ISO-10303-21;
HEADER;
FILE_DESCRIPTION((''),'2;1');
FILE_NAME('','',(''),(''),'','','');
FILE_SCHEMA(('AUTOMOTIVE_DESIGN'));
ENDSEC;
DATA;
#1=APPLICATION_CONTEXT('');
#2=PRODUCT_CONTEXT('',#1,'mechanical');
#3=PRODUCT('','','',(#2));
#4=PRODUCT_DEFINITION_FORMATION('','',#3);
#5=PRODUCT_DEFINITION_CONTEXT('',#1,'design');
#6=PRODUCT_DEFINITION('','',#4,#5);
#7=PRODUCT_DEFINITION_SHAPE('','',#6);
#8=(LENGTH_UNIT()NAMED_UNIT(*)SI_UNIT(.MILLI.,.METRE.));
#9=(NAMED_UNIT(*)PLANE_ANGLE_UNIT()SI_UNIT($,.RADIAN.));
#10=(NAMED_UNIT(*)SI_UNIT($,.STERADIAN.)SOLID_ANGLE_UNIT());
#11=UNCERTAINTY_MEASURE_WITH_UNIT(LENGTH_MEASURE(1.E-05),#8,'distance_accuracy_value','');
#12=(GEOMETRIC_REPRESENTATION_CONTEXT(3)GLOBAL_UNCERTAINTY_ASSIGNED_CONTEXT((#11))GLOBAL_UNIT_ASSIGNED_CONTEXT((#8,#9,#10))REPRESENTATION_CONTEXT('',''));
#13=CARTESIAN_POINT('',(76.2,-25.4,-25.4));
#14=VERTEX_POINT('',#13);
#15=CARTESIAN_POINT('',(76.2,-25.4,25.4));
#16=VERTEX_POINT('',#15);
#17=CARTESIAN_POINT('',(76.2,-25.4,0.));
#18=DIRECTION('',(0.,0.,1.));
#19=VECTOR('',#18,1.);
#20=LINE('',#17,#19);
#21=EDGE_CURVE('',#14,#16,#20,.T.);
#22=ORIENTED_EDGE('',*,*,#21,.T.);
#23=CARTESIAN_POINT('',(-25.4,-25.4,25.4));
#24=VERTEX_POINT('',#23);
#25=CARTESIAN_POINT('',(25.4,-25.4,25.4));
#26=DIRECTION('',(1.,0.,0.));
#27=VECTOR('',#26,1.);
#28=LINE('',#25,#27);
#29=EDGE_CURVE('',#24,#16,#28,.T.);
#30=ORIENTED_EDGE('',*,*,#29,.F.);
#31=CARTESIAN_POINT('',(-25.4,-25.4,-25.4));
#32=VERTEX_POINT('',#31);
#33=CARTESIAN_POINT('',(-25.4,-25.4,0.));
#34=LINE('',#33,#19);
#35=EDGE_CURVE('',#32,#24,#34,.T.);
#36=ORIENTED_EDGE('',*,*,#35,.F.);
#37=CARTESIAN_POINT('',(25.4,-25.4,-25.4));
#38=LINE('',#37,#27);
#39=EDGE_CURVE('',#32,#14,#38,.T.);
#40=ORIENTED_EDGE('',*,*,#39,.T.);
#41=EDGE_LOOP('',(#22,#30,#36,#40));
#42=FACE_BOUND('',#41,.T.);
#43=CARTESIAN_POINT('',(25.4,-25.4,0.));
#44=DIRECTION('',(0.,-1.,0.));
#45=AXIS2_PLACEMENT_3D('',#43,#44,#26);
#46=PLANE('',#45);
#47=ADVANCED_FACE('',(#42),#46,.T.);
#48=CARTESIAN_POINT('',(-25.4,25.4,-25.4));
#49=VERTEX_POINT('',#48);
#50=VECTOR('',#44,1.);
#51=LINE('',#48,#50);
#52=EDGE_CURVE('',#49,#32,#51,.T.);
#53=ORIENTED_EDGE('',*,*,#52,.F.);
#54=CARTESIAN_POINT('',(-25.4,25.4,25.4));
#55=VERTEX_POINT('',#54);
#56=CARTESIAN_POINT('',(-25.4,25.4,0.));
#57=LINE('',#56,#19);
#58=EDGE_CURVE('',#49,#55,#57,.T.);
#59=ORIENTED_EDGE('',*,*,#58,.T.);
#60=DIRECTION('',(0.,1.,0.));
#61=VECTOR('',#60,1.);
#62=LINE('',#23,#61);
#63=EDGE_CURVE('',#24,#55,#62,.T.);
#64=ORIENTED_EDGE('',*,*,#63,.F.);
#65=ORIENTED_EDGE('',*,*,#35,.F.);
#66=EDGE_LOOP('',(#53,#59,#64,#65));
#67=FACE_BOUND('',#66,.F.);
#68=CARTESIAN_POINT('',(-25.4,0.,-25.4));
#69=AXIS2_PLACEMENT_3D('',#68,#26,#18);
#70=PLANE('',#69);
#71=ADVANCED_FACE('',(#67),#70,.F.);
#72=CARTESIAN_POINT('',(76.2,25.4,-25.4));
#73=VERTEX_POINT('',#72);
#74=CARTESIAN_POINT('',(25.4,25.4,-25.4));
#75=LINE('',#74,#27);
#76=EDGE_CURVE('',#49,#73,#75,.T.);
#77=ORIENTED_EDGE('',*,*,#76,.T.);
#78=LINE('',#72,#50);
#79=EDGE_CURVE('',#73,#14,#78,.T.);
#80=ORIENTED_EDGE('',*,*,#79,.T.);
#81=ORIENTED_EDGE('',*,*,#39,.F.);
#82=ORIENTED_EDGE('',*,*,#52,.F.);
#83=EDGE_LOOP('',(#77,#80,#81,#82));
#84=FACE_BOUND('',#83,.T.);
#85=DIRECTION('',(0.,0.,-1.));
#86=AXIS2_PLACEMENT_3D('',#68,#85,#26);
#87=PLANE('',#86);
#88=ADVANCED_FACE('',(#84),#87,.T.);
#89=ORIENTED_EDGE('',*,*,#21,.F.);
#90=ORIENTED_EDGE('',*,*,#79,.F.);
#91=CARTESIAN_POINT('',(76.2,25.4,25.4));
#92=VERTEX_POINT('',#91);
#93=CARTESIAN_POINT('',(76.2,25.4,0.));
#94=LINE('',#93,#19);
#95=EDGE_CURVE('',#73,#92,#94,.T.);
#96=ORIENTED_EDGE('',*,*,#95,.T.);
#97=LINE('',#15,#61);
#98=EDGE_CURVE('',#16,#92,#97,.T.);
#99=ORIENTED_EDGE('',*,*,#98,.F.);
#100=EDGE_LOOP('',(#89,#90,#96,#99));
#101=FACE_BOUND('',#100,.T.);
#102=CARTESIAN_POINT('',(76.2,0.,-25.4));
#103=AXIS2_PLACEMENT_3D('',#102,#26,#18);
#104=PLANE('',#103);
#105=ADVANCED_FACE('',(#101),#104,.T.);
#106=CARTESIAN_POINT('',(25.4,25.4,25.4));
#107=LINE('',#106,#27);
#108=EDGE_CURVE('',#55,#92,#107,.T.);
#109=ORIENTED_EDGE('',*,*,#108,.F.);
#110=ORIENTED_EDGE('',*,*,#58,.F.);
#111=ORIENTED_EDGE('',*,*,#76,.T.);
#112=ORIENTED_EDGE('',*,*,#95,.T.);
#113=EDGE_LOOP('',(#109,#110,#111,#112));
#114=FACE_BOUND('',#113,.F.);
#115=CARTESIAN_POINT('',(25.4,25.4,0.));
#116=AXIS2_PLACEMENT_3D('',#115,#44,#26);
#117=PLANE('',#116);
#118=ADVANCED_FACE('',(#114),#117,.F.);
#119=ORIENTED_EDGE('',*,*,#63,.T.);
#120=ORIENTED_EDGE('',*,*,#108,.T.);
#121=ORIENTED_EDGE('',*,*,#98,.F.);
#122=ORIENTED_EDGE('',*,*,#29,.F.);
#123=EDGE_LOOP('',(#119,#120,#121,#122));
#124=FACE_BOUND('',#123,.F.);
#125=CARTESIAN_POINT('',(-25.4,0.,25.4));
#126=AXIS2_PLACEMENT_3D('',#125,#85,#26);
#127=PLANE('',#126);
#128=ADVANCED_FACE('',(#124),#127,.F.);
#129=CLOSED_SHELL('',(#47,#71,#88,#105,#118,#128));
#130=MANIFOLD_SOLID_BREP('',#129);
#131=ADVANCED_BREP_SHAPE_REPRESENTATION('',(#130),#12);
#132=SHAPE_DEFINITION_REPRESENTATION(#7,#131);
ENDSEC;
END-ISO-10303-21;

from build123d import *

# Parameters (mm, degrees)
F0_W     = 101.6
F0_H     = 50.8
F1_DEPTH = 25.4


# Not quite as in the source:
# - a feature names something its author has since deleted; it is built from what else it names


with BuildPart() as f1:
    # F0 (on Front) → F1 (new body, symmetric)
    with BuildSketch(Plane.XZ):
        with Locations((25.4, 0)):
            Rectangle(F0_W, F0_H)
    extrude(amount=F1_DEPTH, both=True)


solid = f1.part
